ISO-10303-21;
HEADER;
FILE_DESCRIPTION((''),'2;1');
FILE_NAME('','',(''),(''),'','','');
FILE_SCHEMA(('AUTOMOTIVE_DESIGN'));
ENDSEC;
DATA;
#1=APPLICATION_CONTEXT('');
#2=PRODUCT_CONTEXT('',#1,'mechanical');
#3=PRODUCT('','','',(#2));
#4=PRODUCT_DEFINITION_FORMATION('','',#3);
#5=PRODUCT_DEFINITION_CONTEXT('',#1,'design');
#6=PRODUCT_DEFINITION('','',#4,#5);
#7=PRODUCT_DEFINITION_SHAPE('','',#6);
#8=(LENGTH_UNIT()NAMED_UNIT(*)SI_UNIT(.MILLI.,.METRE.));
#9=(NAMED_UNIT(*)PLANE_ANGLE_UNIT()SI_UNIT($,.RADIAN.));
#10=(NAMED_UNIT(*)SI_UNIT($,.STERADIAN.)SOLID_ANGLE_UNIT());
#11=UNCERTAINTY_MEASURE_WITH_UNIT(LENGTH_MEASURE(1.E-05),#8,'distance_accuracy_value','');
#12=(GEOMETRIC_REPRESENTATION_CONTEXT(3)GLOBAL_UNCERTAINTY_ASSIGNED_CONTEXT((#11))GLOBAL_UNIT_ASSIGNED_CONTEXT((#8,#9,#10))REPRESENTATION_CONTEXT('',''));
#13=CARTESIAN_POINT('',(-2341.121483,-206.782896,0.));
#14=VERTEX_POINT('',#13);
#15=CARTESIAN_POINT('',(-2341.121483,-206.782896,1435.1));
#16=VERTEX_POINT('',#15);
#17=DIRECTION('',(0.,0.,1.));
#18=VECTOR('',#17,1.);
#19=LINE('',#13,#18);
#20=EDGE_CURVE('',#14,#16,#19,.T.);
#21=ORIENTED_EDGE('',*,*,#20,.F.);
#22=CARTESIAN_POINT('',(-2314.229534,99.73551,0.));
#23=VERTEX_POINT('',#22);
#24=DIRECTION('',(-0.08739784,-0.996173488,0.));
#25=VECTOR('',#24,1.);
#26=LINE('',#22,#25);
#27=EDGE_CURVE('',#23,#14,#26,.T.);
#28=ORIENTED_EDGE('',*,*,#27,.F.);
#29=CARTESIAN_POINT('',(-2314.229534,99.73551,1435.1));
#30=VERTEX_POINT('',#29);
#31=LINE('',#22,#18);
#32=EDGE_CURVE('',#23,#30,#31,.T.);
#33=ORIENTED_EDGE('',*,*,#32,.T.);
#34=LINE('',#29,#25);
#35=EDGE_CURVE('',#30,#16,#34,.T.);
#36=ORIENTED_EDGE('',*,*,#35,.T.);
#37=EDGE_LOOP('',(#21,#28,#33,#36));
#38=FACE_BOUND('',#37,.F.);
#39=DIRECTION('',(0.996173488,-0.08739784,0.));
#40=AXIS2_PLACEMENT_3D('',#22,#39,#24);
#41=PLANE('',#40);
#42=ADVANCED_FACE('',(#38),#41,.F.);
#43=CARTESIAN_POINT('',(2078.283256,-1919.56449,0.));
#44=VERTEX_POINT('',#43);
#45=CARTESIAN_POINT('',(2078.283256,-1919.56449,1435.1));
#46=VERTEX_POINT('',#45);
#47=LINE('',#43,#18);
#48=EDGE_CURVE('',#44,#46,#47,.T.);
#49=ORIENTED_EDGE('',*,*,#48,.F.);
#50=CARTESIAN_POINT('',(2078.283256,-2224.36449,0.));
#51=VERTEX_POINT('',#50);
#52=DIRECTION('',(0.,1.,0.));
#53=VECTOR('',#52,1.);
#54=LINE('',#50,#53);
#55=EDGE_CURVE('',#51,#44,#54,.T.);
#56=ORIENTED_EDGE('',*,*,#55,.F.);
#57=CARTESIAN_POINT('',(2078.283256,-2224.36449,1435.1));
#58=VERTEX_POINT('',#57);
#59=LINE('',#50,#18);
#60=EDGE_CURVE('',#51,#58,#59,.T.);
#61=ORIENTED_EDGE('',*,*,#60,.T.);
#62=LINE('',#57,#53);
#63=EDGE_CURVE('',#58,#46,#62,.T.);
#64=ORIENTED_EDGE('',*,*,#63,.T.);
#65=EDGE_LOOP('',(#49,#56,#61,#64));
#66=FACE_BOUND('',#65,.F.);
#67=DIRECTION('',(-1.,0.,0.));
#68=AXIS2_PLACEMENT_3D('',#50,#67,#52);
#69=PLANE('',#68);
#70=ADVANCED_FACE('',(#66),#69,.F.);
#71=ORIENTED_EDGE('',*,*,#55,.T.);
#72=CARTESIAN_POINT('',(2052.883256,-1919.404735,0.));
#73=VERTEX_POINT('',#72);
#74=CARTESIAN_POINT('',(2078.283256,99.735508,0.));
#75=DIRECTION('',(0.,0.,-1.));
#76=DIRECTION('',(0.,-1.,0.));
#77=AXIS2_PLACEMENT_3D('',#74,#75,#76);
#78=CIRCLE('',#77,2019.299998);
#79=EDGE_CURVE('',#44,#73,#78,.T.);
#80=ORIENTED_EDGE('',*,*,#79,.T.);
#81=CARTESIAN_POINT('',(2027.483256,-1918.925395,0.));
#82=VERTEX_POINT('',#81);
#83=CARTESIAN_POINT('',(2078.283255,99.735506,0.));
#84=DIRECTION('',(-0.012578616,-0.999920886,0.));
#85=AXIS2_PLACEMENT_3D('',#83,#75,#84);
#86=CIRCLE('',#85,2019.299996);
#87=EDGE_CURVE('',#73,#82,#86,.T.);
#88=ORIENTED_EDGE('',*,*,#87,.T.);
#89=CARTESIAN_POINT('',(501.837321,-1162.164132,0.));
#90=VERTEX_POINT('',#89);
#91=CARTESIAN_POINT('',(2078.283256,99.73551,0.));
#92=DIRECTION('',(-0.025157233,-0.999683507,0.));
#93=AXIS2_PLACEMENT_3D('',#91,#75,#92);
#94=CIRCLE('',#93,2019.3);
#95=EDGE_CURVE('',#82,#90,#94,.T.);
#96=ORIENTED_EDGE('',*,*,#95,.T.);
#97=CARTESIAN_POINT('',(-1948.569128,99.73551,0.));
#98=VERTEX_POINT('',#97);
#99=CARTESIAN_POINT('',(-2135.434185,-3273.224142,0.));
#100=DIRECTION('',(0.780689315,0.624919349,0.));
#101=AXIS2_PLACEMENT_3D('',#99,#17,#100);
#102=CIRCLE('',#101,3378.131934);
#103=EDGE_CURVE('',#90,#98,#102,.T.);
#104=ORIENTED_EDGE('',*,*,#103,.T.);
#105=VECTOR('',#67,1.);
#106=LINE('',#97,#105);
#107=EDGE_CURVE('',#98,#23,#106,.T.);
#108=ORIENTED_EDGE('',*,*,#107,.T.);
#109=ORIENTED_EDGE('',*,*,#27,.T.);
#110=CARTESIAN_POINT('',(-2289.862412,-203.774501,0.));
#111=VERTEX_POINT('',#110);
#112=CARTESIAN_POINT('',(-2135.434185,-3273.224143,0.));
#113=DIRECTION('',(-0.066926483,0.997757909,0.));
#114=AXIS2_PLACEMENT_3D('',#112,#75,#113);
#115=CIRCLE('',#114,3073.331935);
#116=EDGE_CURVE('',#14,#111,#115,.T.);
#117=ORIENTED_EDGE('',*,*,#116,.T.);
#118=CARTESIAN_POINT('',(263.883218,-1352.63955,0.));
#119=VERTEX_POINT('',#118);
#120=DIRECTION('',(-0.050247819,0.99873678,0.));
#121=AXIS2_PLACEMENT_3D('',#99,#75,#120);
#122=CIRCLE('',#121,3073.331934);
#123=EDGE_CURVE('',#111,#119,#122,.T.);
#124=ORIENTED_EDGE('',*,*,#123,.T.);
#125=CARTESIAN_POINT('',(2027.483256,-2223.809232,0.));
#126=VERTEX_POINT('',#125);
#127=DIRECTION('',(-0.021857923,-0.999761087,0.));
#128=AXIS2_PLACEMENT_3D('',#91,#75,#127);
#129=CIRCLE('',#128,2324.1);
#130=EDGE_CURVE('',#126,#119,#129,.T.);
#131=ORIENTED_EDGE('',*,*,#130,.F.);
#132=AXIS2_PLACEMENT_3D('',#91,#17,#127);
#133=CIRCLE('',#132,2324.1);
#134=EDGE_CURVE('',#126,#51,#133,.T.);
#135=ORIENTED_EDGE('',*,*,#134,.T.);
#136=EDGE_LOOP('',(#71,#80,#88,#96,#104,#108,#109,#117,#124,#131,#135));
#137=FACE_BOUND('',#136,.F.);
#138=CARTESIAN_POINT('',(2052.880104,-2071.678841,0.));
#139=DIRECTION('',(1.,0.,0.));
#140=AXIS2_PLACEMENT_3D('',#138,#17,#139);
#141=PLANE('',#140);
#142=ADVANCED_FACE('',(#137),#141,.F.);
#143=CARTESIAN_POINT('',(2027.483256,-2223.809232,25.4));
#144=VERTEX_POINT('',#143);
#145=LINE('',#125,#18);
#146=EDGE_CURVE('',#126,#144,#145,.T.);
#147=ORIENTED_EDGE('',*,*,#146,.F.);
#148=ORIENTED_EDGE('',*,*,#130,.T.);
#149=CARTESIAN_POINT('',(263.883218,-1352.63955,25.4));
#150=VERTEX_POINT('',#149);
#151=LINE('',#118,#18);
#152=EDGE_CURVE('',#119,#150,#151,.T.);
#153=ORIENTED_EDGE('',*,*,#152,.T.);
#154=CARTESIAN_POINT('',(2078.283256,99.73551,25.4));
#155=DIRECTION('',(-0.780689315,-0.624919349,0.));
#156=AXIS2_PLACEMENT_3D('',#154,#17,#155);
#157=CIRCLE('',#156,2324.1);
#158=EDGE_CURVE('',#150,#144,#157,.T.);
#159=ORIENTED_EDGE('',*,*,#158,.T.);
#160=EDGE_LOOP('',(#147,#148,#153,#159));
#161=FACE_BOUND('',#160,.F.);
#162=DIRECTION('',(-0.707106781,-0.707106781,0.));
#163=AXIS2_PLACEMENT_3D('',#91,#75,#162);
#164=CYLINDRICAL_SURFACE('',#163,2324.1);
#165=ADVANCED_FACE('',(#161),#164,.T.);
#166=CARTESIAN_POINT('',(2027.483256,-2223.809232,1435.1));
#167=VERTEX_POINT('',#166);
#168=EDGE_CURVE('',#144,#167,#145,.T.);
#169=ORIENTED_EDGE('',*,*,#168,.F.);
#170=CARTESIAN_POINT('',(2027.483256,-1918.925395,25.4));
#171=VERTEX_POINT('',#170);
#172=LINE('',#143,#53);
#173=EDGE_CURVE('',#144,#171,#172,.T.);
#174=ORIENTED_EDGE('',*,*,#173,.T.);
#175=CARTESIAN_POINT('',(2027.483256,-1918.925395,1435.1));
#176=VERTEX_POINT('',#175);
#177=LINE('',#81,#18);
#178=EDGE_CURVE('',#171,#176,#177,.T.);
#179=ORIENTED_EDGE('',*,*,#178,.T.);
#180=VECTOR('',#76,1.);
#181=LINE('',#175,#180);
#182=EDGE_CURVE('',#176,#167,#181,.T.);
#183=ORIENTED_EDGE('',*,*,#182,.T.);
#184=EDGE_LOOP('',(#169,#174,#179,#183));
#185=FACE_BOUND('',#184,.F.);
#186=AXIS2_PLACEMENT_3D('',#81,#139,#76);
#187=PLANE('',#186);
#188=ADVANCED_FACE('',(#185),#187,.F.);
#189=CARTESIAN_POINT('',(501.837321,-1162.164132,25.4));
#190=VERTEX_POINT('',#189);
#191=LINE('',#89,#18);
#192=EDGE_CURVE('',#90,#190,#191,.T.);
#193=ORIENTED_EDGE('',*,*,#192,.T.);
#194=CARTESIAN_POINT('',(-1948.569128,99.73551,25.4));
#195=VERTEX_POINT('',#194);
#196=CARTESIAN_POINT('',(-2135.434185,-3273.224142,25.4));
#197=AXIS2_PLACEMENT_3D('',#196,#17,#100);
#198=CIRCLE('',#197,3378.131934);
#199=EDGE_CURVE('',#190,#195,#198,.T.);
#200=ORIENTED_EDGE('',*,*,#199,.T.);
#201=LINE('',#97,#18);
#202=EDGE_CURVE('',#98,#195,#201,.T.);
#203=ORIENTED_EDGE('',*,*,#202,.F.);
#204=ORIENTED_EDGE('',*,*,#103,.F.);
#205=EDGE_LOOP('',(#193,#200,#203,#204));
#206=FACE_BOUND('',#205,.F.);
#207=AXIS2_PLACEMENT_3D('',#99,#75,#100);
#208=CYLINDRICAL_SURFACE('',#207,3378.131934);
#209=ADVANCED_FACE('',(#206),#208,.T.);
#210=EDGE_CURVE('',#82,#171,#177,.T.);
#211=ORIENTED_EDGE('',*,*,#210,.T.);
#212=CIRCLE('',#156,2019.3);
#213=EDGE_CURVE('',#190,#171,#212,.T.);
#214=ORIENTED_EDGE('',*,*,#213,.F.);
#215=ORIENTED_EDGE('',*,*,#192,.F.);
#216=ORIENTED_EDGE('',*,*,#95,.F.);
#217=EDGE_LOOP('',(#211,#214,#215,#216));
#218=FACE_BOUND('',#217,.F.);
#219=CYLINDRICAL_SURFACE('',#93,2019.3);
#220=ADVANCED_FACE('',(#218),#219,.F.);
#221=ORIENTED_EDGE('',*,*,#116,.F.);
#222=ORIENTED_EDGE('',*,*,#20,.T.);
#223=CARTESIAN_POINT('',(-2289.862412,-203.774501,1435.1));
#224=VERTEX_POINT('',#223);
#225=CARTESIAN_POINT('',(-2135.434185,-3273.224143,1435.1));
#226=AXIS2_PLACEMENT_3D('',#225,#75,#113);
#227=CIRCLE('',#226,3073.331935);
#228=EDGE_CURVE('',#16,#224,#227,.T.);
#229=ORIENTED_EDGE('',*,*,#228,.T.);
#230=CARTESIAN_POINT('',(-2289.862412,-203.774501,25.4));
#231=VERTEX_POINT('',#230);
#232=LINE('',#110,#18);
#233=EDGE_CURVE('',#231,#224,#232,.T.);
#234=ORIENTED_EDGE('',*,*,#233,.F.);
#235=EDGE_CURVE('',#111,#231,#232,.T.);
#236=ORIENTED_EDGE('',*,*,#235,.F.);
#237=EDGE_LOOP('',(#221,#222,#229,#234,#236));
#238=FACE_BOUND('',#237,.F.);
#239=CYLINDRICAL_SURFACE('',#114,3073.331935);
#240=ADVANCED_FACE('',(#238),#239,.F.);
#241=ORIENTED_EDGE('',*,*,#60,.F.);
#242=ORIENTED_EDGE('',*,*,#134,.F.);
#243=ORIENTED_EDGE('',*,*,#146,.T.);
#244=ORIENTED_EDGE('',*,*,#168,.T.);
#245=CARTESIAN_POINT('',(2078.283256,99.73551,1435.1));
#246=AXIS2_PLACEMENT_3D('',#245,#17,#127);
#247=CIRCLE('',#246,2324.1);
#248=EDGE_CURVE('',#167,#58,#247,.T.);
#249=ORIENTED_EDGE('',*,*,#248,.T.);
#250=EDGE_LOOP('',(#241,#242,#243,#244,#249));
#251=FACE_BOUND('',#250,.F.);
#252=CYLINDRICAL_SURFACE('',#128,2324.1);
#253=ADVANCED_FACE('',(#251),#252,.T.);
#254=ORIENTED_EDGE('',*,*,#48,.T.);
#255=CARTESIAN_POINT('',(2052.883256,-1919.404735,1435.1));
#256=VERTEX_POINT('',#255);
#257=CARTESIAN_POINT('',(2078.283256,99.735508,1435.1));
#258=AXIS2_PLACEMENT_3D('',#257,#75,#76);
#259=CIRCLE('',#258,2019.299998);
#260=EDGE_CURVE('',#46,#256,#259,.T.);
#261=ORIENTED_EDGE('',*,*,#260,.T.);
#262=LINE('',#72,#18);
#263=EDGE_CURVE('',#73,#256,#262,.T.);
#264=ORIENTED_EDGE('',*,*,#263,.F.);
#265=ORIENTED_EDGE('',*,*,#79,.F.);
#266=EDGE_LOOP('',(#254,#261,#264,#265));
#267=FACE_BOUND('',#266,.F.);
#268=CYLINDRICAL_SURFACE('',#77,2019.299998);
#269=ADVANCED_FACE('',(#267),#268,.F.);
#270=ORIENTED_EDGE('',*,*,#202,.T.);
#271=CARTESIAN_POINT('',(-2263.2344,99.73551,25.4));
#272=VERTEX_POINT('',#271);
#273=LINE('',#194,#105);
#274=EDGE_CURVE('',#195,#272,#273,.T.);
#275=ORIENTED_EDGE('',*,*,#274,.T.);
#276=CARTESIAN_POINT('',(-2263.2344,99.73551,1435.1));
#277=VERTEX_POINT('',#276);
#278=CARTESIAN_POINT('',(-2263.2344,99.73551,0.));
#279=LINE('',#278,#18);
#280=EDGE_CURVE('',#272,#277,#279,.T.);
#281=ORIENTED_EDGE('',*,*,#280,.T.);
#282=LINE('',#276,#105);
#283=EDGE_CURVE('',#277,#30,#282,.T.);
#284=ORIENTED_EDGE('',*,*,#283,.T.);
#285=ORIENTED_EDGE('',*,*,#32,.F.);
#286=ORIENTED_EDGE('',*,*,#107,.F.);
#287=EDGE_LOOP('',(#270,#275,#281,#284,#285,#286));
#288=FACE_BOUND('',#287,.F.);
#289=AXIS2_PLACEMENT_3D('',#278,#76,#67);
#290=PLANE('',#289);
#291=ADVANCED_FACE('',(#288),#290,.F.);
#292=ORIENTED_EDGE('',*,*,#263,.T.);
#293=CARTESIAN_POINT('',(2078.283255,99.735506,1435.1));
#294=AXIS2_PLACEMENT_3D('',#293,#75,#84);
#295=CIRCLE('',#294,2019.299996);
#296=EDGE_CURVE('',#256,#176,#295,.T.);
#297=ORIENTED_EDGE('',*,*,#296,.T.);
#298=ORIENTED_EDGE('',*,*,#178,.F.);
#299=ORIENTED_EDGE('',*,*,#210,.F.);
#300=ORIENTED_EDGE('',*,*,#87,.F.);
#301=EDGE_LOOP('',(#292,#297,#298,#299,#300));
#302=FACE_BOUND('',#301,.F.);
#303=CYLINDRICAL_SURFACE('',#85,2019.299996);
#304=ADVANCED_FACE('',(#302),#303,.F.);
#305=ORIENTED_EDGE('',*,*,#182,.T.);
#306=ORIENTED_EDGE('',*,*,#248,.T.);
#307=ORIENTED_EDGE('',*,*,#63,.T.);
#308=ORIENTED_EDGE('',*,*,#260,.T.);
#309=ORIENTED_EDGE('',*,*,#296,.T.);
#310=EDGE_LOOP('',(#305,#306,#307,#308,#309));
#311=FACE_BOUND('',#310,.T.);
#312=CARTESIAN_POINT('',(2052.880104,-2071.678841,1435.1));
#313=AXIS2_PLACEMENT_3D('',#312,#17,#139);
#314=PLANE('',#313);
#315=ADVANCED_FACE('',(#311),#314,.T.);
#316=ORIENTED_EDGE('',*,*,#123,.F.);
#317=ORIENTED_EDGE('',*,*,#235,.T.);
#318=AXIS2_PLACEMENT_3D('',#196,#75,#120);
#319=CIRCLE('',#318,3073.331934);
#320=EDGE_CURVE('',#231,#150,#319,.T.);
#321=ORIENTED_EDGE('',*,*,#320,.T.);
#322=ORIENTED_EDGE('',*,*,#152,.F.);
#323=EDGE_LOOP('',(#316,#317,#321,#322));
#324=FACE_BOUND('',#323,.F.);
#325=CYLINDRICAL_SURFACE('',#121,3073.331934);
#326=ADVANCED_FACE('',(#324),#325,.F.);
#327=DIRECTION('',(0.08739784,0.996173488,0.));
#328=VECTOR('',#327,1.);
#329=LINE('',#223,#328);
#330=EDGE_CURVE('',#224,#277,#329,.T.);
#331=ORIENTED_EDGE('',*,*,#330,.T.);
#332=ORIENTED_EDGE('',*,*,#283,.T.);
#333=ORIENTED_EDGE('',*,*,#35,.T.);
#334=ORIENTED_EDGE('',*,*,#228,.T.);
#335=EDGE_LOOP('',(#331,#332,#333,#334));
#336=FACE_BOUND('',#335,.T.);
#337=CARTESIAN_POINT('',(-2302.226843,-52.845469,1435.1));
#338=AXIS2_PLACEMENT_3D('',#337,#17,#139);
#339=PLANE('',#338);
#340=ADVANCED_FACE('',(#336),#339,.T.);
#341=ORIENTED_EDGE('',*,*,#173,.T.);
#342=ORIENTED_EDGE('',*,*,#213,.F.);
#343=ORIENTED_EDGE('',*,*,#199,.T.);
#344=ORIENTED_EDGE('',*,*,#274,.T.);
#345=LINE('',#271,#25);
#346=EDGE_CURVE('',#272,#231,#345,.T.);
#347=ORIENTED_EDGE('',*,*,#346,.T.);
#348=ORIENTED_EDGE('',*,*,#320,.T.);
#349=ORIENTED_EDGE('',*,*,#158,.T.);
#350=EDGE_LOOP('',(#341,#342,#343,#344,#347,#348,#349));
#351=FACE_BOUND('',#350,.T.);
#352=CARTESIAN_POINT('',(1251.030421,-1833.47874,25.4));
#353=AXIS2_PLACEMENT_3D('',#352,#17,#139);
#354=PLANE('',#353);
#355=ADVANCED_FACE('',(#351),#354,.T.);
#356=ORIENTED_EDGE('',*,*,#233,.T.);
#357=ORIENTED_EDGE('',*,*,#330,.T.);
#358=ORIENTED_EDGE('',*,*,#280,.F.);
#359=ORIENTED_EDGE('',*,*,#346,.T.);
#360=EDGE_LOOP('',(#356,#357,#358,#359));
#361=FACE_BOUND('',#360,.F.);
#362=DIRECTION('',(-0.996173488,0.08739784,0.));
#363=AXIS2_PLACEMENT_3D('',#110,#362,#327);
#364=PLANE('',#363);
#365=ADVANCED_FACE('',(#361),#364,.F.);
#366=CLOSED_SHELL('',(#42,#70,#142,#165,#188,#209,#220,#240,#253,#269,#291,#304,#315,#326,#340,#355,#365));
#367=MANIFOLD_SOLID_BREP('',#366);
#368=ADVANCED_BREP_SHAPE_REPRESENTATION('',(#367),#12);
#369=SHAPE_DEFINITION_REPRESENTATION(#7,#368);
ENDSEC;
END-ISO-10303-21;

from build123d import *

# Parameters (mm, degrees)
F1_DEPTH = 25.4
F2_DEPTH = 1435.1
F3_DEPTH = 25.4
F4_DEPTH = 1435.1


with BuildPart() as f1:
    # F0 (on Top) → F1 (new body)
    with BuildSketch(Plane.XY):
        with BuildLine():
            Line((-1948.5691277788, 99.7355101007), (-2263.234400171, 99.7355101007))
            Line((-2263.234400171, 99.7355101007), (-2289.862411819, -203.7745007557))
            ThreePointArc((-2289.862411819, -203.7745007557), (-874.5398284023, -470.4550472357), (263.8832180742, -1352.6395496224))
            ThreePointArc((263.8832180742, -1352.6395496224), (346.7538874408, -1450.5053929427), (434.8963853674, -1543.651360055))
            Line((434.8963853674, -1543.651360055), (650.422532273, -1328.1252131493))
            ThreePointArc((650.422532273, -1328.1252131493), (573.8397062056, -1247.1951105763), (501.8373213462, -1162.1641319538))
            ThreePointArc((501.8373213462, -1162.1641319538), (-588.8138343544, -269.9358016898), (-1948.5691277788, 99.7355101007))
        make_face()
    extrude(amount=F1_DEPTH)

    # F0 (on Top) → F2 (join)
    with BuildSketch(Plane.XY):
        with BuildLine():
            Line((-2263.234400171, 99.7355101007), (-2314.2295336755, 99.7355101007))
            Line((-2314.2295336755, 99.7355101007), (-2341.1214825581, -206.7828963515))
            ThreePointArc((-2341.1214825581, -206.7828963515), (-2315.4982300933, -205.1716461899), (-2289.862411819, -203.7745007557))
            Line((-2289.862411819, -203.7745007557), (-2263.234400171, 99.7355101007))
        make_face()
    extrude(amount=F2_DEPTH)

    # F0 (on Top) → F3 (join)
    with BuildSketch(Plane.XY):
        with BuildLine():
            ThreePointArc((2027.483255523, -1918.925395054), (1282.1233486229, -1755.9858840328), (650.422532273, -1328.1252131493))
            Line((650.422532273, -1328.1252131493), (434.8963853674, -1543.651360055))
            ThreePointArc((434.8963853674, -1543.651360055), (1165.4738720531, -2037.6039199968), (2027.483255523, -2223.8092323134))
            Line((2027.483255523, -2223.8092323134), (2027.483255523, -1918.925395054))
        make_face()
    extrude(amount=F3_DEPTH)

    # F0 (on Top) → F4 (join)
    with BuildSketch(Plane.XY):
        with BuildLine():
            ThreePointArc((2052.883255523, -1919.4047351522), (2040.182501702, -1919.2050097162), (2027.483255523, -1918.925395054))
            Line((2027.483255523, -1918.925395054), (2027.483255523, -2223.8092323134))
            ThreePointArc((2027.483255523, -2223.8092323134), (2052.8817382899, -2224.225671357), (2078.283255523, -2224.3644898993))
            Line((2078.283255523, -2224.3644898993), (2078.283255523, -1919.5644898993))
            ThreePointArc((2078.283255523, -1919.5644898993), (2065.5830043289, -1919.5245508176), (2052.883255523, -1919.4047351522))
        make_face()
    extrude(amount=F4_DEPTH)


solid = f1.part
